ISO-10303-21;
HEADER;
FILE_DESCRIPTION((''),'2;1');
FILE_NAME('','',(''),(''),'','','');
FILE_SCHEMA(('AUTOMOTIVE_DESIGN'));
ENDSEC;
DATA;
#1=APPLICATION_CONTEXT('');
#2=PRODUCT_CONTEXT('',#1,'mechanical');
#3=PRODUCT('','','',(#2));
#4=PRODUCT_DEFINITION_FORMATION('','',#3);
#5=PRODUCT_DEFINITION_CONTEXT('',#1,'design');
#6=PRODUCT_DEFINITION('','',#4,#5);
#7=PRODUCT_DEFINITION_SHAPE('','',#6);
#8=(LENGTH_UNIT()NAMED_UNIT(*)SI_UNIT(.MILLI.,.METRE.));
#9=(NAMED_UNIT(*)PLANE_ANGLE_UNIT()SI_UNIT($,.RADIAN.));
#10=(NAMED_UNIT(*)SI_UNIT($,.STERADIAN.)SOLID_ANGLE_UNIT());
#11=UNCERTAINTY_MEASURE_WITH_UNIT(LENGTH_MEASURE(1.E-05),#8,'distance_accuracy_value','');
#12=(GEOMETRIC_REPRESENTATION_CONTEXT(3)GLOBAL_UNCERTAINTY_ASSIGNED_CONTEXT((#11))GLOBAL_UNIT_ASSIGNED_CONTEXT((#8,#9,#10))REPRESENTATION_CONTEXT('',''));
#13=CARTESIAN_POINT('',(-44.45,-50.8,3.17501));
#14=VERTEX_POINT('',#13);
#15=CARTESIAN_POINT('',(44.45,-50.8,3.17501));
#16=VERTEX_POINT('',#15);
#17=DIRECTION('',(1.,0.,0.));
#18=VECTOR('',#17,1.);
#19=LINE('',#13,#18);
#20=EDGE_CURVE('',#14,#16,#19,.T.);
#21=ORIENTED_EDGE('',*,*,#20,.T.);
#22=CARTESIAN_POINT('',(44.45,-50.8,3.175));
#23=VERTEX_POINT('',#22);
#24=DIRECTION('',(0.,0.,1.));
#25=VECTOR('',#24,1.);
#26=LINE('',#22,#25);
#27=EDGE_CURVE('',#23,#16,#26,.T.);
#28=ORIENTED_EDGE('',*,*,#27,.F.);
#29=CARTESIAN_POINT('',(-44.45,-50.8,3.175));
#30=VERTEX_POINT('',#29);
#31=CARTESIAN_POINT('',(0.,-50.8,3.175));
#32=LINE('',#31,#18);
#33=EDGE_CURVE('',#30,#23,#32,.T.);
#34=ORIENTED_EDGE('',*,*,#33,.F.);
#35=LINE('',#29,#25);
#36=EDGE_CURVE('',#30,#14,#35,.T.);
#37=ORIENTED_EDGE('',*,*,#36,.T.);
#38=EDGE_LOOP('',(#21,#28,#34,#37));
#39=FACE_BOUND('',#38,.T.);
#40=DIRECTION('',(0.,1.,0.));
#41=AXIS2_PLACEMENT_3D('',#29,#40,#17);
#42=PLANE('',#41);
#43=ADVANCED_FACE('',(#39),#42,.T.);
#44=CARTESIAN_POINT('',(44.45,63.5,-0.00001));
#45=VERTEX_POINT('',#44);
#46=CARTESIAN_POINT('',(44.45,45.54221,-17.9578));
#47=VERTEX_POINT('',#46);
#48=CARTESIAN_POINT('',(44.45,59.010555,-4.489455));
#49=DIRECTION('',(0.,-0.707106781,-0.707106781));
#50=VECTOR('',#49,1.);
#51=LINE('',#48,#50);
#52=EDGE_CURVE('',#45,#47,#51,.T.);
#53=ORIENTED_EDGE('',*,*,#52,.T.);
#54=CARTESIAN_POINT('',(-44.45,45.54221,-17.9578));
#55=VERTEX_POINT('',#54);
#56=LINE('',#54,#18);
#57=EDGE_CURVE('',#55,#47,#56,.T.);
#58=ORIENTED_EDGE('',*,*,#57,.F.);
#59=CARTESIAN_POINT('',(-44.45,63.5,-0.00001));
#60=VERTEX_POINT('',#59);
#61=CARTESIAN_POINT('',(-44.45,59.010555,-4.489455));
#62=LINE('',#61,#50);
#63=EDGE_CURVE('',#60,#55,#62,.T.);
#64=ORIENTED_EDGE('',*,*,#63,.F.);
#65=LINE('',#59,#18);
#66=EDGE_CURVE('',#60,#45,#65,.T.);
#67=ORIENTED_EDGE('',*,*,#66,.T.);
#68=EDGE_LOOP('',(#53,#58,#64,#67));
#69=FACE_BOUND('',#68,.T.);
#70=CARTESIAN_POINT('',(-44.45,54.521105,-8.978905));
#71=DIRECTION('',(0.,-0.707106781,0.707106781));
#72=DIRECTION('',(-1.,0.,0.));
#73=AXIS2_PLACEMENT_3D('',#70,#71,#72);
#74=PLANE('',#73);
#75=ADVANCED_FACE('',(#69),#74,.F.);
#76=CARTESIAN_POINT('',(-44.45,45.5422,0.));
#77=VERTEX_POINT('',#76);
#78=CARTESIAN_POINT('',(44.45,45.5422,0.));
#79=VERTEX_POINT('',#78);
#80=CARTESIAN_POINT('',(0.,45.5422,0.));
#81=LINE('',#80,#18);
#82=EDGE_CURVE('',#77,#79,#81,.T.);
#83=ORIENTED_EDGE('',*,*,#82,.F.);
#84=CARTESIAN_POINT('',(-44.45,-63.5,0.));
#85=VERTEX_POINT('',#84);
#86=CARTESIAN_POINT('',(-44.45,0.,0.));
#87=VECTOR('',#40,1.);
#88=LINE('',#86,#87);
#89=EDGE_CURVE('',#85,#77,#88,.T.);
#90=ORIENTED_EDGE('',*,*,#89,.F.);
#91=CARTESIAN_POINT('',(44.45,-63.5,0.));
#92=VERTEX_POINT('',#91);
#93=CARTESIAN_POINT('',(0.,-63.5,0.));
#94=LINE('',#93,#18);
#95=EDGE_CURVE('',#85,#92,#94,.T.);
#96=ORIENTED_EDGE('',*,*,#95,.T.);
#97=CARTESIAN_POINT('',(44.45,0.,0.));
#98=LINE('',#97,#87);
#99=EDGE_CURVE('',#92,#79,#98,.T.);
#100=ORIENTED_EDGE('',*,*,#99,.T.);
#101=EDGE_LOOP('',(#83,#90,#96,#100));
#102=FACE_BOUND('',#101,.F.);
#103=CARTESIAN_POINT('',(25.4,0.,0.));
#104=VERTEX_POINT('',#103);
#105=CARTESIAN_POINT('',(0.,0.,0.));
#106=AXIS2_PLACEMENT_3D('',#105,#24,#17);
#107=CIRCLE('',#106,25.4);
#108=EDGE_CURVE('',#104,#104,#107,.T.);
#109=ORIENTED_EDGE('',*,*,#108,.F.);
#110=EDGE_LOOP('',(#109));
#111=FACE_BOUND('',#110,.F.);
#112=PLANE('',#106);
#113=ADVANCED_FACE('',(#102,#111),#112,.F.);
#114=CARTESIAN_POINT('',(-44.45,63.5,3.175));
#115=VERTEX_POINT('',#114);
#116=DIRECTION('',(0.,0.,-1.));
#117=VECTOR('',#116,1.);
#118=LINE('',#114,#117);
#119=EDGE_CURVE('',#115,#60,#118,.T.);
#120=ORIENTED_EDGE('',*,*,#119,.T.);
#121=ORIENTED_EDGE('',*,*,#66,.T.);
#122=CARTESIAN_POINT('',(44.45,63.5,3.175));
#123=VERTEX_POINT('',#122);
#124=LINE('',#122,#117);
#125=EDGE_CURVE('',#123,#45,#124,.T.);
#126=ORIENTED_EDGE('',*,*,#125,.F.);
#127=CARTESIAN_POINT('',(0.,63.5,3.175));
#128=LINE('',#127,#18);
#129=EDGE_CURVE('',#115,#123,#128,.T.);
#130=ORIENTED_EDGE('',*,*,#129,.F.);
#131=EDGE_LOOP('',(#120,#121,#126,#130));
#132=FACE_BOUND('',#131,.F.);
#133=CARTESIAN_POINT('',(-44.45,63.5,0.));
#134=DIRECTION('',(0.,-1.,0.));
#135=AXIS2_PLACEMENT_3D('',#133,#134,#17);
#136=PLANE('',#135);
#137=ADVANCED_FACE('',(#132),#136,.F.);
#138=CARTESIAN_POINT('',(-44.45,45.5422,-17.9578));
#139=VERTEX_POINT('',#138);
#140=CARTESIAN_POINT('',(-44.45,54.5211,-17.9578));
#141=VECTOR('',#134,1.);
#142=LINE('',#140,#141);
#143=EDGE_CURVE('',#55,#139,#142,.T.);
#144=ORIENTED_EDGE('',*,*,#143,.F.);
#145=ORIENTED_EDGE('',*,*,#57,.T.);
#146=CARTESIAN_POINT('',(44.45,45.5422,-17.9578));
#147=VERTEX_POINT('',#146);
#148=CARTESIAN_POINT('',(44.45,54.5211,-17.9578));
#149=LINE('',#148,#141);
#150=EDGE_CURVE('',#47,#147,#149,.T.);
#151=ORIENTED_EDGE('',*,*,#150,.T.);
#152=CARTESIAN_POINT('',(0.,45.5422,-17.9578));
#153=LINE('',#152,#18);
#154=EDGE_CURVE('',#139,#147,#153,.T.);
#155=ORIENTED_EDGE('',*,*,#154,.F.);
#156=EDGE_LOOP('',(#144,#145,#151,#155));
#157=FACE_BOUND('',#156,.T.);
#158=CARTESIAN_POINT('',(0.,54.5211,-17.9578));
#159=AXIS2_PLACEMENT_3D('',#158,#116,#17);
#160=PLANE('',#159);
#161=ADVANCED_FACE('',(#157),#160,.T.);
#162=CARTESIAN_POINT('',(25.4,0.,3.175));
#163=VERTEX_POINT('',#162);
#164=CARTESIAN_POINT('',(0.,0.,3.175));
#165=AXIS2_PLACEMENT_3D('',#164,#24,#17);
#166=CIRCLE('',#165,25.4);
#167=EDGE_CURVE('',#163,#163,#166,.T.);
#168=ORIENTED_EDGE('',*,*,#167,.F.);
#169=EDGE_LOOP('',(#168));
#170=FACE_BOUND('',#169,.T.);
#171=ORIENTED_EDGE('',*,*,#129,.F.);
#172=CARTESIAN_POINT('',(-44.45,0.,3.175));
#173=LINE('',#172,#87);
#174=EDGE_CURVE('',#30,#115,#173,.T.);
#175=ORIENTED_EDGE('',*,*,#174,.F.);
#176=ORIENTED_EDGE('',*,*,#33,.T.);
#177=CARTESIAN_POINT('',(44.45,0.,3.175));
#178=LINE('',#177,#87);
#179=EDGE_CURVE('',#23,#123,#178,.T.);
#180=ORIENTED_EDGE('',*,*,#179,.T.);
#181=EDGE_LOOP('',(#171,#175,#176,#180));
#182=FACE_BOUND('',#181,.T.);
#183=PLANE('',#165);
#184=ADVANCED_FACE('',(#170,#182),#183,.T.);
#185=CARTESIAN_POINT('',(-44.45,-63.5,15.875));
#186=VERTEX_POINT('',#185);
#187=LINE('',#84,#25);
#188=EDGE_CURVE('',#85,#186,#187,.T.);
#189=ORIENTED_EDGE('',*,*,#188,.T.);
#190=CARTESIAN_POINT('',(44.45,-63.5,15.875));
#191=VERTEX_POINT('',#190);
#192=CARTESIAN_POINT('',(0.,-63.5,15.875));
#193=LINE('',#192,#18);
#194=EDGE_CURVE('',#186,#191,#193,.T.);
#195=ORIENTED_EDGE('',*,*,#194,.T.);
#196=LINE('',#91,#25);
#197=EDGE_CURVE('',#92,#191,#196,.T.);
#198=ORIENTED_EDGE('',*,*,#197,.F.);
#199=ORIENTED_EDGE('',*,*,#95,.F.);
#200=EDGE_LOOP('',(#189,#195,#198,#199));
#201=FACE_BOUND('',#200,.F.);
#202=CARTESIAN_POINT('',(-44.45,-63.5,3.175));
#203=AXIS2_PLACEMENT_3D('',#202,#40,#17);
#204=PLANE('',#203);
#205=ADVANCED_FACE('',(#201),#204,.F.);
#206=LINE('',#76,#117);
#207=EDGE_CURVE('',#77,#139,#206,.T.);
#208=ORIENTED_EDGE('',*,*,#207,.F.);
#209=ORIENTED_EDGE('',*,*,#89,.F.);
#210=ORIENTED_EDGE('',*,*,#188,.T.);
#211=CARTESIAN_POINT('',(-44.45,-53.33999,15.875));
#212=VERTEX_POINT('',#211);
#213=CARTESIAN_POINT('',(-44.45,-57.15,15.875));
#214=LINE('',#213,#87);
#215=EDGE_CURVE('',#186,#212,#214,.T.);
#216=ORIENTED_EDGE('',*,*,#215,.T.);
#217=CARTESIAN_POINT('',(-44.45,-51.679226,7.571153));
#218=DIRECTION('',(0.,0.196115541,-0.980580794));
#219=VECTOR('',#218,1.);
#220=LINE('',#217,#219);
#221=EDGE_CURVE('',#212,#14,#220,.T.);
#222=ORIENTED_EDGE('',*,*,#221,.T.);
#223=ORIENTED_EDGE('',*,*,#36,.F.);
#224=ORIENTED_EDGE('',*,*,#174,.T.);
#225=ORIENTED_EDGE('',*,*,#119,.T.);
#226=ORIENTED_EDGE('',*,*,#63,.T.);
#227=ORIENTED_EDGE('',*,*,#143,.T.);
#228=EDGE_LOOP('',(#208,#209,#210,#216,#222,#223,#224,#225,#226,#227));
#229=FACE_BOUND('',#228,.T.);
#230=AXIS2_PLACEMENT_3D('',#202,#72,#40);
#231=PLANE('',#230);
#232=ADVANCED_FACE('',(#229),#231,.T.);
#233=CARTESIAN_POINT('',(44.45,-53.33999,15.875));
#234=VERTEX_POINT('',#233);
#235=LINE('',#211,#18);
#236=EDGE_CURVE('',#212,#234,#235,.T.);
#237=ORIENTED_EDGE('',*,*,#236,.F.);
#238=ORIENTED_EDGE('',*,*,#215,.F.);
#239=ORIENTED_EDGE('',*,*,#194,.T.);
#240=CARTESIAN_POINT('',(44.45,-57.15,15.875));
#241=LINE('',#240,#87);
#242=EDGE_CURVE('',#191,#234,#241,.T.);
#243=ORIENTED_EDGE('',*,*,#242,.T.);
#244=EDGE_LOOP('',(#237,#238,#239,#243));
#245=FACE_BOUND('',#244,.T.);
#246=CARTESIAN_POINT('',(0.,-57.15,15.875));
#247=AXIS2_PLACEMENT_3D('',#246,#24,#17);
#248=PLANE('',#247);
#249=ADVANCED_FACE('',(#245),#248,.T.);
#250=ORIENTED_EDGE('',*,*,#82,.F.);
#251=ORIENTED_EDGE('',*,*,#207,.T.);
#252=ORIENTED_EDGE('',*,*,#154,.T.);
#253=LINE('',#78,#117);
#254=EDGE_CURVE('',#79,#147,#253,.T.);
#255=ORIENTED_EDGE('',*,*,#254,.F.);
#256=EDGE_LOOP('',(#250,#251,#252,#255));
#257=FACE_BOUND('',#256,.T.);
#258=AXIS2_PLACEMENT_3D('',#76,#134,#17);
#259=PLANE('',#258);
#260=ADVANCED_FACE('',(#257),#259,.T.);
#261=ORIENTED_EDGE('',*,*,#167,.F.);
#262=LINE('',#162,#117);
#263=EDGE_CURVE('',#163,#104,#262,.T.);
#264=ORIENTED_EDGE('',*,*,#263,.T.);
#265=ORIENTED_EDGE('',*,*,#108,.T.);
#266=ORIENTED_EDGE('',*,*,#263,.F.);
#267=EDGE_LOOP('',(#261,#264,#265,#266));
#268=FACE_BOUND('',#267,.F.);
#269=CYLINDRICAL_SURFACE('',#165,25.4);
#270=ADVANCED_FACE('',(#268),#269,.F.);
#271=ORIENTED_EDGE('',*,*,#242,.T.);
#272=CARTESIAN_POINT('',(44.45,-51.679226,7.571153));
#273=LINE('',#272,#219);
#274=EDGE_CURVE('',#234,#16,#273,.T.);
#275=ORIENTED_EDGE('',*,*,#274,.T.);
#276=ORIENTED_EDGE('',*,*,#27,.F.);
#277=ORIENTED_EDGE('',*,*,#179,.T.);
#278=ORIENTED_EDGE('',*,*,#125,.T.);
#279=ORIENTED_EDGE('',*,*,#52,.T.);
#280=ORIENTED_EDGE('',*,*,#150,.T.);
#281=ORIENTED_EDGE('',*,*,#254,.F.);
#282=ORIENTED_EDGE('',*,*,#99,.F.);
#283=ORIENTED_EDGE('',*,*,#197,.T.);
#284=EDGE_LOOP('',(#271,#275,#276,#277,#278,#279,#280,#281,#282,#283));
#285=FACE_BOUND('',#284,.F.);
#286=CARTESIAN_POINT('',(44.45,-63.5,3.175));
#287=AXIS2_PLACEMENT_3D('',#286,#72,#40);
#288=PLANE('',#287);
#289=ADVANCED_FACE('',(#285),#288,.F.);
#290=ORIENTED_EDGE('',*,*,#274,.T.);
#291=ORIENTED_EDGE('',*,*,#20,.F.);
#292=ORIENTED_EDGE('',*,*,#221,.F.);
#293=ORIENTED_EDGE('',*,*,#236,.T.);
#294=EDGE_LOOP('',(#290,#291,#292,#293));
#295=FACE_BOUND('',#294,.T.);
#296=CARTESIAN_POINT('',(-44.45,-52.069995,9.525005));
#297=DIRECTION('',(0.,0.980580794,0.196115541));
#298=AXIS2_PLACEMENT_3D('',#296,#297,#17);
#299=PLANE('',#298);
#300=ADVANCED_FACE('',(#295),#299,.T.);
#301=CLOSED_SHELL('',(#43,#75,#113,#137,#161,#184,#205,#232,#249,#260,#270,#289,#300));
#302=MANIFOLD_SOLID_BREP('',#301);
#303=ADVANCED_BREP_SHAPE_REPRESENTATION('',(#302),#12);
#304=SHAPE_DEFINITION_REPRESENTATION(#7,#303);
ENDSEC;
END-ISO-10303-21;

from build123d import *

# Parameters (mm, degrees)
F0_W     = 88.9
F0_H     = 127
F1_DEPTH = 3.175
F2_W     = 88.9
F2_H     = 17.9578
F3_DEPTH = 17.9578
F4_SIZE  = 17.95779
F5_R     = 25.4
F6_DEPTH = 3.175
F7_W     = 88.9
F7_H     = 12.7
F8_DEPTH = 12.7
F9_SIZE2 = 12.69999
F9_SIZE  = 2.53999


# Not quite as in the source:
# - a fillet or chamfer is up to 0.001 mm smaller than in the source, because OpenCascade refuses the exact size


with BuildPart() as f1:
    # F0 (on Top) → F1 (new body)
    with BuildSketch(Plane.XY):
        Rectangle(F0_W, F0_H)
    extrude(amount=F1_DEPTH)

    # F2 (on face) → F3 (join)
    with BuildSketch(Plane(origin=(0, 0, 0), x_dir=(1, 0, 0), z_dir=(0, 0, -1))):
        with Locations((0, -54.5211)):
            Rectangle(F2_W, F2_H)
    extrude(amount=F3_DEPTH)

    # F4 (size 17.9578 in the source; OpenCascade refuses exactly that, so slightly less here)
    f4_edges = [f1.edges().sort_by_distance(p)[0] for p in [
        (0, 63.5, -17.9578),
    ]]
    chamfer(f4_edges, length=F4_SIZE)

    # F5 (on face) → F6 (cut)
    with BuildSketch(Plane.XY.offset(3.175)):
        Circle(F5_R)
    extrude(amount=-F6_DEPTH, mode=Mode.SUBTRACT)

    # F7 (on face) → F8 (join)
    with BuildSketch(Plane.XY.offset(3.175)):
        with Locations((0, -57.15)):
            Rectangle(F7_W, F7_H)
    extrude(amount=F8_DEPTH)

    # F9 (size 2.54 and 12.7 in the source; OpenCascade refuses exactly that, so slightly less here)
    f9_edges = [f1.edges().sort_by_distance(p)[0] for p in [
        (0, -50.8, 15.875),
    ]]
    f9_side = f1.faces().sort_by_distance((0, -57.15, 15.875))[0]
    chamfer(f9_edges, length=F9_SIZE, length2=F9_SIZE2, reference=f9_side)


solid = f1.part
